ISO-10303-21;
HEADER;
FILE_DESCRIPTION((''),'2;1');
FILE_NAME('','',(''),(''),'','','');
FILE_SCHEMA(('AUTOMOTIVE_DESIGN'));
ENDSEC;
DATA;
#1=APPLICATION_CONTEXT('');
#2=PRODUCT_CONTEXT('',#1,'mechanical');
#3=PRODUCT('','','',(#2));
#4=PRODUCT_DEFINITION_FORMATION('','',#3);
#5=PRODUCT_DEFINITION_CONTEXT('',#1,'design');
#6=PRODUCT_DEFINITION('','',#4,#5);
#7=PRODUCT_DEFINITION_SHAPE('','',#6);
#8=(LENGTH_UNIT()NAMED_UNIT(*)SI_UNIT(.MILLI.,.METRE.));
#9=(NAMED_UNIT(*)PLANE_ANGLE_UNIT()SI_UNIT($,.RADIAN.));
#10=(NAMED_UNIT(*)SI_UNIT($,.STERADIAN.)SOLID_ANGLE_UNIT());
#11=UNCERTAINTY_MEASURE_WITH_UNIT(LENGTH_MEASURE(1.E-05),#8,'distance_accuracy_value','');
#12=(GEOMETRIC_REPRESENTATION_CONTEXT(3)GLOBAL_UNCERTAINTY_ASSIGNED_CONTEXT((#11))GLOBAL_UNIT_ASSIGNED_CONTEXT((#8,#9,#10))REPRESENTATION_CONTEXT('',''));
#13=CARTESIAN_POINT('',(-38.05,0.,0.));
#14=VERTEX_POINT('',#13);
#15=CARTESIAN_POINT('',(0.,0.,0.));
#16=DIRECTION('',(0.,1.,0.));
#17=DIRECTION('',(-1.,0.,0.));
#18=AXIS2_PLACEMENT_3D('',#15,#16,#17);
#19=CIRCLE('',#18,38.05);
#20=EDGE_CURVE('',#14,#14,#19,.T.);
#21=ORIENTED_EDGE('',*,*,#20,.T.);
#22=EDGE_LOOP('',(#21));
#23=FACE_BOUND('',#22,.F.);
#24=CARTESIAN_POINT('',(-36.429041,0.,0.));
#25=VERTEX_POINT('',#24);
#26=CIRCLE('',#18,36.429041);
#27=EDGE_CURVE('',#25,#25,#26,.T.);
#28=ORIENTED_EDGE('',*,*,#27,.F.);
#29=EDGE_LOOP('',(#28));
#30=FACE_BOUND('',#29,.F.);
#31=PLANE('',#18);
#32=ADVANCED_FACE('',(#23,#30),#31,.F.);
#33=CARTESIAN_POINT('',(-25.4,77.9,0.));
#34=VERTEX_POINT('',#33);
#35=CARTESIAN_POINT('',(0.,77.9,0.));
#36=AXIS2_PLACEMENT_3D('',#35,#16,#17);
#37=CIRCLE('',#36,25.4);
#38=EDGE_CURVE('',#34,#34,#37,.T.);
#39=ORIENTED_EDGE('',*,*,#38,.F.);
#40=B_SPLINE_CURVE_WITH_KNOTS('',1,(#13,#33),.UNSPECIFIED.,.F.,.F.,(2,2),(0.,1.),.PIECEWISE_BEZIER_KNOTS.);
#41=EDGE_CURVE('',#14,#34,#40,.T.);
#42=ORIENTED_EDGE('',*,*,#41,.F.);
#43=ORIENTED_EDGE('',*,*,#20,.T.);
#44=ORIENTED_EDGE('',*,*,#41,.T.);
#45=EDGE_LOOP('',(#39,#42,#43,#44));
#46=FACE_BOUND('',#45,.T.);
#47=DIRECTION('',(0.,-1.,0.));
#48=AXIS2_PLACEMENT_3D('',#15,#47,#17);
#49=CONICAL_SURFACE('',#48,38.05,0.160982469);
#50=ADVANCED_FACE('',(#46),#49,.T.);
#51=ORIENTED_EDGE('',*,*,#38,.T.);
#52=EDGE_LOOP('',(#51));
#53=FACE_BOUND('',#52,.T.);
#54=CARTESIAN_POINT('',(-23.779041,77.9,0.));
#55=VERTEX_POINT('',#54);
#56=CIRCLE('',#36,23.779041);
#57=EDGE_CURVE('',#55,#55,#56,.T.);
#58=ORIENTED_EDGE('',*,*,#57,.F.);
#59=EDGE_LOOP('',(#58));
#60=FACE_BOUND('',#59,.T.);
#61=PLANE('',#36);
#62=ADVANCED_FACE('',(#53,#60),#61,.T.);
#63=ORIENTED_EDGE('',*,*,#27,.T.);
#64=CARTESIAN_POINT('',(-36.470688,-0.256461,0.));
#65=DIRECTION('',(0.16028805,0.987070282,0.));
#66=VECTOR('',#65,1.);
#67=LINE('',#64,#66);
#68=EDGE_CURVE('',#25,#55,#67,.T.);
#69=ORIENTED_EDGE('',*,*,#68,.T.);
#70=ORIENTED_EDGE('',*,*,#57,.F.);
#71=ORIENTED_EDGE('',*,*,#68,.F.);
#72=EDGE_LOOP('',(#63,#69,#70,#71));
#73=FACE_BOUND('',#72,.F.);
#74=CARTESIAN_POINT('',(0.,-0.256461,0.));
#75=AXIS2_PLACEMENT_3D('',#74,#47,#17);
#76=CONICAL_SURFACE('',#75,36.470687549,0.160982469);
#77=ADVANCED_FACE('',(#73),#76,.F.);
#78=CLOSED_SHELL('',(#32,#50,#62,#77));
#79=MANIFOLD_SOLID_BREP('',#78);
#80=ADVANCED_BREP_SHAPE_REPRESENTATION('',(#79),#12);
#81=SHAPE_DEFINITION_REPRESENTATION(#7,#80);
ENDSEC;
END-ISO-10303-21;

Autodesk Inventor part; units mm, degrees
ref_plane "YZ Plane" through (0, 0, 0) normal (1, 0, 0) x (0, 1, 0)
ref_plane "XY Plane" through (0, 0, 0) normal (0, 0, 1) x (1, 0, 0)
sketch "Szkic6" plane through (0, 0, 0) normal (0, 1, 0) x (-1, 0, 0)
  circle A0 centre (0, 0) radius 38.05
  dimension "d33" = 76.1
ref_plane "Płaszczyzna konstrukcyjna1" through (0, 77.9, 0) normal (0, 1, 0) x (-1, 0, 0)
sketch "Szkic7" plane through (0, 77.9, 0) normal (0, 1, 0) x (-1, 0, 0)
  circle A0 centre (0, 0) radius 25.4
  dimension "d35" = 50.8
loft "Wyciągnięcie złożone1" add profiles "Szkic6", "Szkic7"
shell "Skorupa1" thickness 1.6 removed faces 2 at (7.2508, 77.9, -1.9085) at (-5.8996, 0, 7.9079)
equation "\"d33\" = OD1"
equation "\"d35\" = OD2"
equation "\"d52\" = THK"
equation "\"SzerokośćGięciaPodcięcia\" = Grubość"
equation "\"RozmiarPodcięciaNarożnika\" = 4 * Grubość"
equation "\"PromieńPrzejścia\" = PromieńGięcia"
equation "\"Rozmiar_promienia_Jacobiego\" = PromieńGięcia"
equation "\"Wielk_odstępu\" = Grubość"
equation "\"d2\" = PromieńGięcia"
equation "\"d23\" = PromieńGięcia"
equation "\"OD1\" = 76.1"
equation "\"OD2\" = 50.8"
equation "\"L\" = 77.9"
equation "\"THK\" = 1.6"
equation "\"d34\" = L"
equation "\"Grubość\" = 1.5"
equation "\"PromieńGięcia\" = 3"
properties part number "Redukcja symetryczna Ø76,1x50,8x1,6 L=77,9" material "304"
